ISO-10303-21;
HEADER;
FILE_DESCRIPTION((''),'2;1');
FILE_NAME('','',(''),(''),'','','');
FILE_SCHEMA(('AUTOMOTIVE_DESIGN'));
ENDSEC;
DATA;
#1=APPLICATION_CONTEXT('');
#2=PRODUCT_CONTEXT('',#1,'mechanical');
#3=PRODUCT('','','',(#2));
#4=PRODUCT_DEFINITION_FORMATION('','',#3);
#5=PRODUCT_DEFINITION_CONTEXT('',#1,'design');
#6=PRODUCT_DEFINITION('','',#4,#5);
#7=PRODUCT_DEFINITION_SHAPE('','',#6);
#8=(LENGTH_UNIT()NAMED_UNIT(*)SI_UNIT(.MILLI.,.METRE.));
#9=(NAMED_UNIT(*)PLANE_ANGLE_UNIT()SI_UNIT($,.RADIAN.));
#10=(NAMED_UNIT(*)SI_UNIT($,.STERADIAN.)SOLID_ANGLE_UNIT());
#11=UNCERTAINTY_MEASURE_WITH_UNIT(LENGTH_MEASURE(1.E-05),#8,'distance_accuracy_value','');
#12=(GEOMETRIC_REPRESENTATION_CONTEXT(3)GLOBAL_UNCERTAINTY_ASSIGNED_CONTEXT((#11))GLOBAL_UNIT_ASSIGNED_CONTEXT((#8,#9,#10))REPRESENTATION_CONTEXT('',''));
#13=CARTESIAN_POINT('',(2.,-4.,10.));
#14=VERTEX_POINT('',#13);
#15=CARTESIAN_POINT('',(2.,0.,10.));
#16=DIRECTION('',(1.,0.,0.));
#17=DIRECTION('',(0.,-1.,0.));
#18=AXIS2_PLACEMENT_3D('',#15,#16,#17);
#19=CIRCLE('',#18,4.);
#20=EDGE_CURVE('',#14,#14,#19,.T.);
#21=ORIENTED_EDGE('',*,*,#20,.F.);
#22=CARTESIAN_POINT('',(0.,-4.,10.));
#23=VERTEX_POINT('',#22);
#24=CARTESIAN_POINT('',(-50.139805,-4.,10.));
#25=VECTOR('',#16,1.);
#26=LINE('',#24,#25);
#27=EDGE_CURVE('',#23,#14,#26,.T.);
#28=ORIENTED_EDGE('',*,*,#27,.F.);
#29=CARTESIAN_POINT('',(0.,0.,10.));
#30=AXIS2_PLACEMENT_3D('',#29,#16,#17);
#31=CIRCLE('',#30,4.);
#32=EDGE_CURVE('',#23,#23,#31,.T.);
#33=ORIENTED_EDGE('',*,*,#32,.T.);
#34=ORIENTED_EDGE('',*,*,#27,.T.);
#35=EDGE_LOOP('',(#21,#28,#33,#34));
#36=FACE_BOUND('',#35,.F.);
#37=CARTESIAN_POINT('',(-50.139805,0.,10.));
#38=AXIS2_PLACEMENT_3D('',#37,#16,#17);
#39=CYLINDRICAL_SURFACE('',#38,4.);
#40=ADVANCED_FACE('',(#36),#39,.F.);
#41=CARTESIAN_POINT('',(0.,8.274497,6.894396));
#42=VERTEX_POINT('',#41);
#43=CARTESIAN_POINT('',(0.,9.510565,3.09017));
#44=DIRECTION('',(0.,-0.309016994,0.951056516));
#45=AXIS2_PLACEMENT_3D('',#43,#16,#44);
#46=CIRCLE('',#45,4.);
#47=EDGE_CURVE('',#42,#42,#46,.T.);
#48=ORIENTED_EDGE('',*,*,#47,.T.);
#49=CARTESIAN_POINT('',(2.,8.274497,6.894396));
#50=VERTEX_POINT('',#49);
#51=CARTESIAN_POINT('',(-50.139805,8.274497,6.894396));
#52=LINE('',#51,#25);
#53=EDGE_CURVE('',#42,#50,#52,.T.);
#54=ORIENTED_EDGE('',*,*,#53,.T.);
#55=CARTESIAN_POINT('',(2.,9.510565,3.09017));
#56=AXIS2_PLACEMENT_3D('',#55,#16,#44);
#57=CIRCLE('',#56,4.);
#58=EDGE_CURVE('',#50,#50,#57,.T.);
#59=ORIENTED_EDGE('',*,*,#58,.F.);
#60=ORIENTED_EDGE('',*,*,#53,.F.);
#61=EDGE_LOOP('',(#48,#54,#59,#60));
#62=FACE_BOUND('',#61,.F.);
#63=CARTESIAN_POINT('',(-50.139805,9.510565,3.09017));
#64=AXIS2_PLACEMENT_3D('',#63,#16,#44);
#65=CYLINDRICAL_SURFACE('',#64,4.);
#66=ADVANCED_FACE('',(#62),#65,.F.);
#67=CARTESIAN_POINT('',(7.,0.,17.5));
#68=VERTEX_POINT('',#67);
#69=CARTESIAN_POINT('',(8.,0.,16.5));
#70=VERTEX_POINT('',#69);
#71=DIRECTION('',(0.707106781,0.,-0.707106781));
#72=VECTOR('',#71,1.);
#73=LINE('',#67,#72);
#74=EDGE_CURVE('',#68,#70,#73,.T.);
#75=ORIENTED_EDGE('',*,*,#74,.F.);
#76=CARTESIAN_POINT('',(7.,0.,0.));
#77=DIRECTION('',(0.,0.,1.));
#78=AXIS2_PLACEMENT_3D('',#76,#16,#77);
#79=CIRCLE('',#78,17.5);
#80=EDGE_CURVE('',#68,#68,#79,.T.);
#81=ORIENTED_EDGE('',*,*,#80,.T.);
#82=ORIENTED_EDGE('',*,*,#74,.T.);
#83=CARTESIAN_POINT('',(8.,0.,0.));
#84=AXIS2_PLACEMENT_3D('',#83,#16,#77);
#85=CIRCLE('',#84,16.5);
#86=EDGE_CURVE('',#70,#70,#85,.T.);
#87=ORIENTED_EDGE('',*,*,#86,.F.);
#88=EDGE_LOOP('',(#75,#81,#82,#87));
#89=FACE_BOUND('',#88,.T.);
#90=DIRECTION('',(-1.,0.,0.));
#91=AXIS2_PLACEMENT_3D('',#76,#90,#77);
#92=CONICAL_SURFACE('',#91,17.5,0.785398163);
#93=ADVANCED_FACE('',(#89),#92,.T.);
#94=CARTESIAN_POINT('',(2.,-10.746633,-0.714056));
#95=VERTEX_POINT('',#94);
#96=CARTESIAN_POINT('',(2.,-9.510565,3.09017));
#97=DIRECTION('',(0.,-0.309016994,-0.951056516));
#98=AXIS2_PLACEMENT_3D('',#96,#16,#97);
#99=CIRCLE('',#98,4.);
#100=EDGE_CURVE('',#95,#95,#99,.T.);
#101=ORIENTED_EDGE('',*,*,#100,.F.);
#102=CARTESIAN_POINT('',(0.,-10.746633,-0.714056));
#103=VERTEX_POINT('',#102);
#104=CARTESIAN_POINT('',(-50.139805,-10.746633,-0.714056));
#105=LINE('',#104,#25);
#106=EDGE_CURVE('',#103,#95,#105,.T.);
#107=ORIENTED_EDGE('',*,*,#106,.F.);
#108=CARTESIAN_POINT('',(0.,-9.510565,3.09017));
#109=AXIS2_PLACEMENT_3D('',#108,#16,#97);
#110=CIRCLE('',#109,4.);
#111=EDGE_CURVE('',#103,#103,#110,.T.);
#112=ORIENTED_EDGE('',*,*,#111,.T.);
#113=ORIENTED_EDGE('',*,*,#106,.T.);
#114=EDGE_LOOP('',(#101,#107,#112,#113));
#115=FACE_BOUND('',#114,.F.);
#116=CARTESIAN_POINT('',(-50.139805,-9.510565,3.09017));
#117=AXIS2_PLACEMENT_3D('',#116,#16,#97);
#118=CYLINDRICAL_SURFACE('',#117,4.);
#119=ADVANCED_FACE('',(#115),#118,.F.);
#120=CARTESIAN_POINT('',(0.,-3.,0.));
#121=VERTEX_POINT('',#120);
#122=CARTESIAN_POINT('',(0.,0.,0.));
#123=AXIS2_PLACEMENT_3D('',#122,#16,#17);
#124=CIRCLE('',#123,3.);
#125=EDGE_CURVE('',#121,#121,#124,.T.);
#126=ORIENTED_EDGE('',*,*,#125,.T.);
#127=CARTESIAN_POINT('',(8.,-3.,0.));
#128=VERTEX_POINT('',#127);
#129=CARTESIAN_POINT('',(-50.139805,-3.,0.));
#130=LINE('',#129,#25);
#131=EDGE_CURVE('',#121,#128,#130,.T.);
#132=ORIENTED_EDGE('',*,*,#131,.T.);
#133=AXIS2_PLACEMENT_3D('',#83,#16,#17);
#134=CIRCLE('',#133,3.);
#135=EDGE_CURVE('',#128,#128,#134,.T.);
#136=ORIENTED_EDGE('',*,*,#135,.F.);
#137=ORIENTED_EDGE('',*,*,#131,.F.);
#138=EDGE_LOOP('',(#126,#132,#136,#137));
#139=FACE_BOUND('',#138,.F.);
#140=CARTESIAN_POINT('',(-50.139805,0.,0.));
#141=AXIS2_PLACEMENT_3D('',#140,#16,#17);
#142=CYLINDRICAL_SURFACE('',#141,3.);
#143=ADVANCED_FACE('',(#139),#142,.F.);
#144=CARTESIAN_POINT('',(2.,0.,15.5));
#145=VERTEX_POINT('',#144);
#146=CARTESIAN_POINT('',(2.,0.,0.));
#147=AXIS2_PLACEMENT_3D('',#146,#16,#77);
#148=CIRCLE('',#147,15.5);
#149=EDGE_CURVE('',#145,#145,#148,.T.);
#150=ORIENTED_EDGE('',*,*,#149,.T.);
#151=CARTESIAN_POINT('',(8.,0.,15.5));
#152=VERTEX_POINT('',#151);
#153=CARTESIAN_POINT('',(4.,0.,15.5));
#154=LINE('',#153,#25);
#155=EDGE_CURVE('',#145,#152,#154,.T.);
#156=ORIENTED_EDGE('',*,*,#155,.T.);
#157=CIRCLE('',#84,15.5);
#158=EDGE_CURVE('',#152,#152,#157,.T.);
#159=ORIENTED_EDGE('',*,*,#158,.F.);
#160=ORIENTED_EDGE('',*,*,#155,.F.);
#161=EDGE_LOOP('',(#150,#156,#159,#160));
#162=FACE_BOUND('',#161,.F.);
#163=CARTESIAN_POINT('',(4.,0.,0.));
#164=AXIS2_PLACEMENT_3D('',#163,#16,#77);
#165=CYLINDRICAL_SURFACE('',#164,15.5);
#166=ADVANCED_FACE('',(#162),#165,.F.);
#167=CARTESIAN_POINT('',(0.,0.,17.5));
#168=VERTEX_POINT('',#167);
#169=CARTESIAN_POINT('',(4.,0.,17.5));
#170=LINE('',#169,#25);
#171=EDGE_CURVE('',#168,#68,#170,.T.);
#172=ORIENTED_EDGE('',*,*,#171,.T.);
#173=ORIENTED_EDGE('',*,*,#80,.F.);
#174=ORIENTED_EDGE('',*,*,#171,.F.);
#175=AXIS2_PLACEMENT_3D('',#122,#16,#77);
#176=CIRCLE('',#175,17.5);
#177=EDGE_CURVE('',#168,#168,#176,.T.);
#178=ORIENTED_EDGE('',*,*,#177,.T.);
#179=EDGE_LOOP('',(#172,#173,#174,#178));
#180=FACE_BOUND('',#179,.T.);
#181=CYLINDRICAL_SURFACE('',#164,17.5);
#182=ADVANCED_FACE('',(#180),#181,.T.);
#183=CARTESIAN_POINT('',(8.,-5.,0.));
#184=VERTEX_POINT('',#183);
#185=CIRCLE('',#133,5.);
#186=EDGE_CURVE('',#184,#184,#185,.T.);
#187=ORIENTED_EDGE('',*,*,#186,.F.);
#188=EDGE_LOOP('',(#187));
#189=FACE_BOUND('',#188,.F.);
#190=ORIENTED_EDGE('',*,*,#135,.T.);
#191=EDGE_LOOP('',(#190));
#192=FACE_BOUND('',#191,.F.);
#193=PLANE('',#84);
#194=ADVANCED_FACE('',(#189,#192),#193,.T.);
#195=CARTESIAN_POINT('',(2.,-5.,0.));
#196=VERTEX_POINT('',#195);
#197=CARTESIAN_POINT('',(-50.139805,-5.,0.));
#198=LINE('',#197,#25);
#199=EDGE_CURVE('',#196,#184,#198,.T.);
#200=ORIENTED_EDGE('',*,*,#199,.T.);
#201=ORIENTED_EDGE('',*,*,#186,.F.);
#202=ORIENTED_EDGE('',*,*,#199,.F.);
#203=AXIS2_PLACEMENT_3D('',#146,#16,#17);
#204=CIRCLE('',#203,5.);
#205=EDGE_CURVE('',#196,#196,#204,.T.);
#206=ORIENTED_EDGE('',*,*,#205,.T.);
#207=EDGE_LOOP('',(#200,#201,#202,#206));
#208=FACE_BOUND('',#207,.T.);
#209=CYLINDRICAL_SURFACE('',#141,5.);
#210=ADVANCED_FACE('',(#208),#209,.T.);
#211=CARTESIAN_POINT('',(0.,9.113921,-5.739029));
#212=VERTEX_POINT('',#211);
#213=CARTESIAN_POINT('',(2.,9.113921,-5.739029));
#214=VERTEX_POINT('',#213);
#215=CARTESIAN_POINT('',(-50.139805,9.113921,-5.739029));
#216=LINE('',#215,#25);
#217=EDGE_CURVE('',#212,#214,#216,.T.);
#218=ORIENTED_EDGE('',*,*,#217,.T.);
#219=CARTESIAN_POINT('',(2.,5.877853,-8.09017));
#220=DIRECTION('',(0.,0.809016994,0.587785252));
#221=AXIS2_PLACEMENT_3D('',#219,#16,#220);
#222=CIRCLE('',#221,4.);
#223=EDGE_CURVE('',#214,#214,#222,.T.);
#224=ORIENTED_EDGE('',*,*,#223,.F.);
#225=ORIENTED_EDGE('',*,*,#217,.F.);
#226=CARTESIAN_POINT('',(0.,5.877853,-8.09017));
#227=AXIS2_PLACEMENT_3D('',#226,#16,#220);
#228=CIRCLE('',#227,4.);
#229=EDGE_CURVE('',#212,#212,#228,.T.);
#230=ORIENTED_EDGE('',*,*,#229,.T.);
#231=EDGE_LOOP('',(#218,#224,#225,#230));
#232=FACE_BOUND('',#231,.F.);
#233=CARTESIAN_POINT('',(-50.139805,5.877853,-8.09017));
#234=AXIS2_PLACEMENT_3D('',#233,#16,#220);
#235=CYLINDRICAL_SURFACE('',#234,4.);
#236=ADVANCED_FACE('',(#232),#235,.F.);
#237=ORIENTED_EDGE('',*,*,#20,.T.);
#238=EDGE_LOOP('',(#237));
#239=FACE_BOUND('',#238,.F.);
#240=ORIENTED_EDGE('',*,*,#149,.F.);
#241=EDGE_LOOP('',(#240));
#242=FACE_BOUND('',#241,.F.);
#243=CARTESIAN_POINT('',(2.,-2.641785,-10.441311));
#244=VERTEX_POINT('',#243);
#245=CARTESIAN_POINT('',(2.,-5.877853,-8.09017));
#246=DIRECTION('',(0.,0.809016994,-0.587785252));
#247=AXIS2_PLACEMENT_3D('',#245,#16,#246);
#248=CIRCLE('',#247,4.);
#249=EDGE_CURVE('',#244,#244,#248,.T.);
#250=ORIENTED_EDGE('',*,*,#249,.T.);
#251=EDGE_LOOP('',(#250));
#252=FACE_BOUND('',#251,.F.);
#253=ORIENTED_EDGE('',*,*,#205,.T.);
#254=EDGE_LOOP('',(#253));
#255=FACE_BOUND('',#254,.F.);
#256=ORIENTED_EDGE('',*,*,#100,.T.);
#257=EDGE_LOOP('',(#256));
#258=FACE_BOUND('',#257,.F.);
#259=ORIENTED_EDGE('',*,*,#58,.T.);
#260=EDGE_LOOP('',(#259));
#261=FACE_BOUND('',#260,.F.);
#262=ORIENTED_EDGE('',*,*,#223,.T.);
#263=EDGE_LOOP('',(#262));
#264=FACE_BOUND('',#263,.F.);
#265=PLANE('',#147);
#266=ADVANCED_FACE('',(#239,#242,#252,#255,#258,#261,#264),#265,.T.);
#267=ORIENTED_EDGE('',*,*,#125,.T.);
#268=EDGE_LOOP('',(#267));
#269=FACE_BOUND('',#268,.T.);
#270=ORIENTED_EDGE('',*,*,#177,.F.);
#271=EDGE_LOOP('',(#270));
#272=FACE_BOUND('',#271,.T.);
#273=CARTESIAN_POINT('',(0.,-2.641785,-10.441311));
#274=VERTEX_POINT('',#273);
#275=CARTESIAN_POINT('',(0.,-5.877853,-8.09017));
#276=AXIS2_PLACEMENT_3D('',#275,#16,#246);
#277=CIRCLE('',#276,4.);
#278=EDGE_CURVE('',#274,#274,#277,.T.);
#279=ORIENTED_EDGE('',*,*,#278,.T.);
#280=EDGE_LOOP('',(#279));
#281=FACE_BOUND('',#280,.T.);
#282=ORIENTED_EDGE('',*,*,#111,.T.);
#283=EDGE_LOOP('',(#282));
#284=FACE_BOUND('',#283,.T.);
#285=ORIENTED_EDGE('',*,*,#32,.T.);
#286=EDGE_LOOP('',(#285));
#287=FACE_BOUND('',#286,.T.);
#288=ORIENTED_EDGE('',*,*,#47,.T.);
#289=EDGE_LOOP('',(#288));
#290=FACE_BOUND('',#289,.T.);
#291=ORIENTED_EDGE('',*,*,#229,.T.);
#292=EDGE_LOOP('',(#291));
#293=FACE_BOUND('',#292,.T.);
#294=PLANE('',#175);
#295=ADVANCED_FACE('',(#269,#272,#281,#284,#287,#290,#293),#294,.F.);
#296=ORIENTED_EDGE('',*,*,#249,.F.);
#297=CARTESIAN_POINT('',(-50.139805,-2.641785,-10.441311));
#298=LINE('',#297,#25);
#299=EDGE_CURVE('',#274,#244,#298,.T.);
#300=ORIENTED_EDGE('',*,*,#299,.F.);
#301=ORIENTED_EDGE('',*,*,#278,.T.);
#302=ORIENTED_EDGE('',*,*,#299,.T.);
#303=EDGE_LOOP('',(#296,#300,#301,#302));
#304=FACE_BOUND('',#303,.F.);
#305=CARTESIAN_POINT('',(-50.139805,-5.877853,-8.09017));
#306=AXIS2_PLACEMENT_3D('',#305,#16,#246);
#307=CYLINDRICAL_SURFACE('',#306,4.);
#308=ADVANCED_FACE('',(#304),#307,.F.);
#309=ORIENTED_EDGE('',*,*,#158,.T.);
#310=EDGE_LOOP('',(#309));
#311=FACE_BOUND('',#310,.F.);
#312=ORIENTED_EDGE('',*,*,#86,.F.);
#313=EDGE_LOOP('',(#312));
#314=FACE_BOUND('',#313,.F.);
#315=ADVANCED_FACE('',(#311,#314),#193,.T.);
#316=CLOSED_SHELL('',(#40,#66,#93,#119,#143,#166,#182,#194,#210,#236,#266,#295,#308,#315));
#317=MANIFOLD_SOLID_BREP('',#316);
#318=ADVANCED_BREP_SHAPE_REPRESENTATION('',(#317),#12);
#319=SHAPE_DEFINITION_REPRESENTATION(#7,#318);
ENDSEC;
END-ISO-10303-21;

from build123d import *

# Parameters (mm, degrees)
F0_W            = 8
F0_H            = 17.5
F3_D            = 6
F4_T            = -2
F6_D            = 8
F6_COPIES_COUNT = 5
F7_SIZE         = 1


# Not quite as in the source:
# - a pattern or mirror of a feature is missing from the dataset's text; its kind, count and spacing are read off the source's solid


with BuildPart() as f1:
    # F0 (on Front) → F1 (revolve)
    with BuildSketch(Plane.XZ):
        with Locations((4, 8.75)):
            Rectangle(F0_W, F0_H)
    revolve(axis=Axis((4, 0, 0), (1, 0, 0)))

    # F3 (through all)
    with Locations(Plane(origin=(0, 0, 0), x_dir=(0, 1, 0), z_dir=(-1, 0, 0))):
        with Locations((0, 0)):
            Hole(F3_D / 2)

    # F4
    f4_openings = [f1.faces().sort_by_distance(p)[0] for p in [
        (8, 0, -17.005025),
    ]]
    offset(amount=F4_T, openings=f4_openings)

    # F6 (through all)
    with Locations(Plane(origin=(0, 0, 0), x_dir=(0, 1, 0), z_dir=(-1, 0, 0))):
        with Locations((0, -10)):
            f6 = Hole(F6_D / 2)

    # F6_copies: F6 ×5 about axis
    f6_copies_axis = Axis((0, 0, 0), (1, 0, 0))
    for i in range(1, F6_COPIES_COUNT):
        add(f6.rotate(f6_copies_axis, i * 360 / F6_COPIES_COUNT), mode=Mode.SUBTRACT)

    # F7
    f7_edges = [f1.edges().sort_by_distance(p)[0] for p in [
        (8, 0, -17.5),
    ]]
    chamfer(f7_edges, length=F7_SIZE)


solid = f1.part
